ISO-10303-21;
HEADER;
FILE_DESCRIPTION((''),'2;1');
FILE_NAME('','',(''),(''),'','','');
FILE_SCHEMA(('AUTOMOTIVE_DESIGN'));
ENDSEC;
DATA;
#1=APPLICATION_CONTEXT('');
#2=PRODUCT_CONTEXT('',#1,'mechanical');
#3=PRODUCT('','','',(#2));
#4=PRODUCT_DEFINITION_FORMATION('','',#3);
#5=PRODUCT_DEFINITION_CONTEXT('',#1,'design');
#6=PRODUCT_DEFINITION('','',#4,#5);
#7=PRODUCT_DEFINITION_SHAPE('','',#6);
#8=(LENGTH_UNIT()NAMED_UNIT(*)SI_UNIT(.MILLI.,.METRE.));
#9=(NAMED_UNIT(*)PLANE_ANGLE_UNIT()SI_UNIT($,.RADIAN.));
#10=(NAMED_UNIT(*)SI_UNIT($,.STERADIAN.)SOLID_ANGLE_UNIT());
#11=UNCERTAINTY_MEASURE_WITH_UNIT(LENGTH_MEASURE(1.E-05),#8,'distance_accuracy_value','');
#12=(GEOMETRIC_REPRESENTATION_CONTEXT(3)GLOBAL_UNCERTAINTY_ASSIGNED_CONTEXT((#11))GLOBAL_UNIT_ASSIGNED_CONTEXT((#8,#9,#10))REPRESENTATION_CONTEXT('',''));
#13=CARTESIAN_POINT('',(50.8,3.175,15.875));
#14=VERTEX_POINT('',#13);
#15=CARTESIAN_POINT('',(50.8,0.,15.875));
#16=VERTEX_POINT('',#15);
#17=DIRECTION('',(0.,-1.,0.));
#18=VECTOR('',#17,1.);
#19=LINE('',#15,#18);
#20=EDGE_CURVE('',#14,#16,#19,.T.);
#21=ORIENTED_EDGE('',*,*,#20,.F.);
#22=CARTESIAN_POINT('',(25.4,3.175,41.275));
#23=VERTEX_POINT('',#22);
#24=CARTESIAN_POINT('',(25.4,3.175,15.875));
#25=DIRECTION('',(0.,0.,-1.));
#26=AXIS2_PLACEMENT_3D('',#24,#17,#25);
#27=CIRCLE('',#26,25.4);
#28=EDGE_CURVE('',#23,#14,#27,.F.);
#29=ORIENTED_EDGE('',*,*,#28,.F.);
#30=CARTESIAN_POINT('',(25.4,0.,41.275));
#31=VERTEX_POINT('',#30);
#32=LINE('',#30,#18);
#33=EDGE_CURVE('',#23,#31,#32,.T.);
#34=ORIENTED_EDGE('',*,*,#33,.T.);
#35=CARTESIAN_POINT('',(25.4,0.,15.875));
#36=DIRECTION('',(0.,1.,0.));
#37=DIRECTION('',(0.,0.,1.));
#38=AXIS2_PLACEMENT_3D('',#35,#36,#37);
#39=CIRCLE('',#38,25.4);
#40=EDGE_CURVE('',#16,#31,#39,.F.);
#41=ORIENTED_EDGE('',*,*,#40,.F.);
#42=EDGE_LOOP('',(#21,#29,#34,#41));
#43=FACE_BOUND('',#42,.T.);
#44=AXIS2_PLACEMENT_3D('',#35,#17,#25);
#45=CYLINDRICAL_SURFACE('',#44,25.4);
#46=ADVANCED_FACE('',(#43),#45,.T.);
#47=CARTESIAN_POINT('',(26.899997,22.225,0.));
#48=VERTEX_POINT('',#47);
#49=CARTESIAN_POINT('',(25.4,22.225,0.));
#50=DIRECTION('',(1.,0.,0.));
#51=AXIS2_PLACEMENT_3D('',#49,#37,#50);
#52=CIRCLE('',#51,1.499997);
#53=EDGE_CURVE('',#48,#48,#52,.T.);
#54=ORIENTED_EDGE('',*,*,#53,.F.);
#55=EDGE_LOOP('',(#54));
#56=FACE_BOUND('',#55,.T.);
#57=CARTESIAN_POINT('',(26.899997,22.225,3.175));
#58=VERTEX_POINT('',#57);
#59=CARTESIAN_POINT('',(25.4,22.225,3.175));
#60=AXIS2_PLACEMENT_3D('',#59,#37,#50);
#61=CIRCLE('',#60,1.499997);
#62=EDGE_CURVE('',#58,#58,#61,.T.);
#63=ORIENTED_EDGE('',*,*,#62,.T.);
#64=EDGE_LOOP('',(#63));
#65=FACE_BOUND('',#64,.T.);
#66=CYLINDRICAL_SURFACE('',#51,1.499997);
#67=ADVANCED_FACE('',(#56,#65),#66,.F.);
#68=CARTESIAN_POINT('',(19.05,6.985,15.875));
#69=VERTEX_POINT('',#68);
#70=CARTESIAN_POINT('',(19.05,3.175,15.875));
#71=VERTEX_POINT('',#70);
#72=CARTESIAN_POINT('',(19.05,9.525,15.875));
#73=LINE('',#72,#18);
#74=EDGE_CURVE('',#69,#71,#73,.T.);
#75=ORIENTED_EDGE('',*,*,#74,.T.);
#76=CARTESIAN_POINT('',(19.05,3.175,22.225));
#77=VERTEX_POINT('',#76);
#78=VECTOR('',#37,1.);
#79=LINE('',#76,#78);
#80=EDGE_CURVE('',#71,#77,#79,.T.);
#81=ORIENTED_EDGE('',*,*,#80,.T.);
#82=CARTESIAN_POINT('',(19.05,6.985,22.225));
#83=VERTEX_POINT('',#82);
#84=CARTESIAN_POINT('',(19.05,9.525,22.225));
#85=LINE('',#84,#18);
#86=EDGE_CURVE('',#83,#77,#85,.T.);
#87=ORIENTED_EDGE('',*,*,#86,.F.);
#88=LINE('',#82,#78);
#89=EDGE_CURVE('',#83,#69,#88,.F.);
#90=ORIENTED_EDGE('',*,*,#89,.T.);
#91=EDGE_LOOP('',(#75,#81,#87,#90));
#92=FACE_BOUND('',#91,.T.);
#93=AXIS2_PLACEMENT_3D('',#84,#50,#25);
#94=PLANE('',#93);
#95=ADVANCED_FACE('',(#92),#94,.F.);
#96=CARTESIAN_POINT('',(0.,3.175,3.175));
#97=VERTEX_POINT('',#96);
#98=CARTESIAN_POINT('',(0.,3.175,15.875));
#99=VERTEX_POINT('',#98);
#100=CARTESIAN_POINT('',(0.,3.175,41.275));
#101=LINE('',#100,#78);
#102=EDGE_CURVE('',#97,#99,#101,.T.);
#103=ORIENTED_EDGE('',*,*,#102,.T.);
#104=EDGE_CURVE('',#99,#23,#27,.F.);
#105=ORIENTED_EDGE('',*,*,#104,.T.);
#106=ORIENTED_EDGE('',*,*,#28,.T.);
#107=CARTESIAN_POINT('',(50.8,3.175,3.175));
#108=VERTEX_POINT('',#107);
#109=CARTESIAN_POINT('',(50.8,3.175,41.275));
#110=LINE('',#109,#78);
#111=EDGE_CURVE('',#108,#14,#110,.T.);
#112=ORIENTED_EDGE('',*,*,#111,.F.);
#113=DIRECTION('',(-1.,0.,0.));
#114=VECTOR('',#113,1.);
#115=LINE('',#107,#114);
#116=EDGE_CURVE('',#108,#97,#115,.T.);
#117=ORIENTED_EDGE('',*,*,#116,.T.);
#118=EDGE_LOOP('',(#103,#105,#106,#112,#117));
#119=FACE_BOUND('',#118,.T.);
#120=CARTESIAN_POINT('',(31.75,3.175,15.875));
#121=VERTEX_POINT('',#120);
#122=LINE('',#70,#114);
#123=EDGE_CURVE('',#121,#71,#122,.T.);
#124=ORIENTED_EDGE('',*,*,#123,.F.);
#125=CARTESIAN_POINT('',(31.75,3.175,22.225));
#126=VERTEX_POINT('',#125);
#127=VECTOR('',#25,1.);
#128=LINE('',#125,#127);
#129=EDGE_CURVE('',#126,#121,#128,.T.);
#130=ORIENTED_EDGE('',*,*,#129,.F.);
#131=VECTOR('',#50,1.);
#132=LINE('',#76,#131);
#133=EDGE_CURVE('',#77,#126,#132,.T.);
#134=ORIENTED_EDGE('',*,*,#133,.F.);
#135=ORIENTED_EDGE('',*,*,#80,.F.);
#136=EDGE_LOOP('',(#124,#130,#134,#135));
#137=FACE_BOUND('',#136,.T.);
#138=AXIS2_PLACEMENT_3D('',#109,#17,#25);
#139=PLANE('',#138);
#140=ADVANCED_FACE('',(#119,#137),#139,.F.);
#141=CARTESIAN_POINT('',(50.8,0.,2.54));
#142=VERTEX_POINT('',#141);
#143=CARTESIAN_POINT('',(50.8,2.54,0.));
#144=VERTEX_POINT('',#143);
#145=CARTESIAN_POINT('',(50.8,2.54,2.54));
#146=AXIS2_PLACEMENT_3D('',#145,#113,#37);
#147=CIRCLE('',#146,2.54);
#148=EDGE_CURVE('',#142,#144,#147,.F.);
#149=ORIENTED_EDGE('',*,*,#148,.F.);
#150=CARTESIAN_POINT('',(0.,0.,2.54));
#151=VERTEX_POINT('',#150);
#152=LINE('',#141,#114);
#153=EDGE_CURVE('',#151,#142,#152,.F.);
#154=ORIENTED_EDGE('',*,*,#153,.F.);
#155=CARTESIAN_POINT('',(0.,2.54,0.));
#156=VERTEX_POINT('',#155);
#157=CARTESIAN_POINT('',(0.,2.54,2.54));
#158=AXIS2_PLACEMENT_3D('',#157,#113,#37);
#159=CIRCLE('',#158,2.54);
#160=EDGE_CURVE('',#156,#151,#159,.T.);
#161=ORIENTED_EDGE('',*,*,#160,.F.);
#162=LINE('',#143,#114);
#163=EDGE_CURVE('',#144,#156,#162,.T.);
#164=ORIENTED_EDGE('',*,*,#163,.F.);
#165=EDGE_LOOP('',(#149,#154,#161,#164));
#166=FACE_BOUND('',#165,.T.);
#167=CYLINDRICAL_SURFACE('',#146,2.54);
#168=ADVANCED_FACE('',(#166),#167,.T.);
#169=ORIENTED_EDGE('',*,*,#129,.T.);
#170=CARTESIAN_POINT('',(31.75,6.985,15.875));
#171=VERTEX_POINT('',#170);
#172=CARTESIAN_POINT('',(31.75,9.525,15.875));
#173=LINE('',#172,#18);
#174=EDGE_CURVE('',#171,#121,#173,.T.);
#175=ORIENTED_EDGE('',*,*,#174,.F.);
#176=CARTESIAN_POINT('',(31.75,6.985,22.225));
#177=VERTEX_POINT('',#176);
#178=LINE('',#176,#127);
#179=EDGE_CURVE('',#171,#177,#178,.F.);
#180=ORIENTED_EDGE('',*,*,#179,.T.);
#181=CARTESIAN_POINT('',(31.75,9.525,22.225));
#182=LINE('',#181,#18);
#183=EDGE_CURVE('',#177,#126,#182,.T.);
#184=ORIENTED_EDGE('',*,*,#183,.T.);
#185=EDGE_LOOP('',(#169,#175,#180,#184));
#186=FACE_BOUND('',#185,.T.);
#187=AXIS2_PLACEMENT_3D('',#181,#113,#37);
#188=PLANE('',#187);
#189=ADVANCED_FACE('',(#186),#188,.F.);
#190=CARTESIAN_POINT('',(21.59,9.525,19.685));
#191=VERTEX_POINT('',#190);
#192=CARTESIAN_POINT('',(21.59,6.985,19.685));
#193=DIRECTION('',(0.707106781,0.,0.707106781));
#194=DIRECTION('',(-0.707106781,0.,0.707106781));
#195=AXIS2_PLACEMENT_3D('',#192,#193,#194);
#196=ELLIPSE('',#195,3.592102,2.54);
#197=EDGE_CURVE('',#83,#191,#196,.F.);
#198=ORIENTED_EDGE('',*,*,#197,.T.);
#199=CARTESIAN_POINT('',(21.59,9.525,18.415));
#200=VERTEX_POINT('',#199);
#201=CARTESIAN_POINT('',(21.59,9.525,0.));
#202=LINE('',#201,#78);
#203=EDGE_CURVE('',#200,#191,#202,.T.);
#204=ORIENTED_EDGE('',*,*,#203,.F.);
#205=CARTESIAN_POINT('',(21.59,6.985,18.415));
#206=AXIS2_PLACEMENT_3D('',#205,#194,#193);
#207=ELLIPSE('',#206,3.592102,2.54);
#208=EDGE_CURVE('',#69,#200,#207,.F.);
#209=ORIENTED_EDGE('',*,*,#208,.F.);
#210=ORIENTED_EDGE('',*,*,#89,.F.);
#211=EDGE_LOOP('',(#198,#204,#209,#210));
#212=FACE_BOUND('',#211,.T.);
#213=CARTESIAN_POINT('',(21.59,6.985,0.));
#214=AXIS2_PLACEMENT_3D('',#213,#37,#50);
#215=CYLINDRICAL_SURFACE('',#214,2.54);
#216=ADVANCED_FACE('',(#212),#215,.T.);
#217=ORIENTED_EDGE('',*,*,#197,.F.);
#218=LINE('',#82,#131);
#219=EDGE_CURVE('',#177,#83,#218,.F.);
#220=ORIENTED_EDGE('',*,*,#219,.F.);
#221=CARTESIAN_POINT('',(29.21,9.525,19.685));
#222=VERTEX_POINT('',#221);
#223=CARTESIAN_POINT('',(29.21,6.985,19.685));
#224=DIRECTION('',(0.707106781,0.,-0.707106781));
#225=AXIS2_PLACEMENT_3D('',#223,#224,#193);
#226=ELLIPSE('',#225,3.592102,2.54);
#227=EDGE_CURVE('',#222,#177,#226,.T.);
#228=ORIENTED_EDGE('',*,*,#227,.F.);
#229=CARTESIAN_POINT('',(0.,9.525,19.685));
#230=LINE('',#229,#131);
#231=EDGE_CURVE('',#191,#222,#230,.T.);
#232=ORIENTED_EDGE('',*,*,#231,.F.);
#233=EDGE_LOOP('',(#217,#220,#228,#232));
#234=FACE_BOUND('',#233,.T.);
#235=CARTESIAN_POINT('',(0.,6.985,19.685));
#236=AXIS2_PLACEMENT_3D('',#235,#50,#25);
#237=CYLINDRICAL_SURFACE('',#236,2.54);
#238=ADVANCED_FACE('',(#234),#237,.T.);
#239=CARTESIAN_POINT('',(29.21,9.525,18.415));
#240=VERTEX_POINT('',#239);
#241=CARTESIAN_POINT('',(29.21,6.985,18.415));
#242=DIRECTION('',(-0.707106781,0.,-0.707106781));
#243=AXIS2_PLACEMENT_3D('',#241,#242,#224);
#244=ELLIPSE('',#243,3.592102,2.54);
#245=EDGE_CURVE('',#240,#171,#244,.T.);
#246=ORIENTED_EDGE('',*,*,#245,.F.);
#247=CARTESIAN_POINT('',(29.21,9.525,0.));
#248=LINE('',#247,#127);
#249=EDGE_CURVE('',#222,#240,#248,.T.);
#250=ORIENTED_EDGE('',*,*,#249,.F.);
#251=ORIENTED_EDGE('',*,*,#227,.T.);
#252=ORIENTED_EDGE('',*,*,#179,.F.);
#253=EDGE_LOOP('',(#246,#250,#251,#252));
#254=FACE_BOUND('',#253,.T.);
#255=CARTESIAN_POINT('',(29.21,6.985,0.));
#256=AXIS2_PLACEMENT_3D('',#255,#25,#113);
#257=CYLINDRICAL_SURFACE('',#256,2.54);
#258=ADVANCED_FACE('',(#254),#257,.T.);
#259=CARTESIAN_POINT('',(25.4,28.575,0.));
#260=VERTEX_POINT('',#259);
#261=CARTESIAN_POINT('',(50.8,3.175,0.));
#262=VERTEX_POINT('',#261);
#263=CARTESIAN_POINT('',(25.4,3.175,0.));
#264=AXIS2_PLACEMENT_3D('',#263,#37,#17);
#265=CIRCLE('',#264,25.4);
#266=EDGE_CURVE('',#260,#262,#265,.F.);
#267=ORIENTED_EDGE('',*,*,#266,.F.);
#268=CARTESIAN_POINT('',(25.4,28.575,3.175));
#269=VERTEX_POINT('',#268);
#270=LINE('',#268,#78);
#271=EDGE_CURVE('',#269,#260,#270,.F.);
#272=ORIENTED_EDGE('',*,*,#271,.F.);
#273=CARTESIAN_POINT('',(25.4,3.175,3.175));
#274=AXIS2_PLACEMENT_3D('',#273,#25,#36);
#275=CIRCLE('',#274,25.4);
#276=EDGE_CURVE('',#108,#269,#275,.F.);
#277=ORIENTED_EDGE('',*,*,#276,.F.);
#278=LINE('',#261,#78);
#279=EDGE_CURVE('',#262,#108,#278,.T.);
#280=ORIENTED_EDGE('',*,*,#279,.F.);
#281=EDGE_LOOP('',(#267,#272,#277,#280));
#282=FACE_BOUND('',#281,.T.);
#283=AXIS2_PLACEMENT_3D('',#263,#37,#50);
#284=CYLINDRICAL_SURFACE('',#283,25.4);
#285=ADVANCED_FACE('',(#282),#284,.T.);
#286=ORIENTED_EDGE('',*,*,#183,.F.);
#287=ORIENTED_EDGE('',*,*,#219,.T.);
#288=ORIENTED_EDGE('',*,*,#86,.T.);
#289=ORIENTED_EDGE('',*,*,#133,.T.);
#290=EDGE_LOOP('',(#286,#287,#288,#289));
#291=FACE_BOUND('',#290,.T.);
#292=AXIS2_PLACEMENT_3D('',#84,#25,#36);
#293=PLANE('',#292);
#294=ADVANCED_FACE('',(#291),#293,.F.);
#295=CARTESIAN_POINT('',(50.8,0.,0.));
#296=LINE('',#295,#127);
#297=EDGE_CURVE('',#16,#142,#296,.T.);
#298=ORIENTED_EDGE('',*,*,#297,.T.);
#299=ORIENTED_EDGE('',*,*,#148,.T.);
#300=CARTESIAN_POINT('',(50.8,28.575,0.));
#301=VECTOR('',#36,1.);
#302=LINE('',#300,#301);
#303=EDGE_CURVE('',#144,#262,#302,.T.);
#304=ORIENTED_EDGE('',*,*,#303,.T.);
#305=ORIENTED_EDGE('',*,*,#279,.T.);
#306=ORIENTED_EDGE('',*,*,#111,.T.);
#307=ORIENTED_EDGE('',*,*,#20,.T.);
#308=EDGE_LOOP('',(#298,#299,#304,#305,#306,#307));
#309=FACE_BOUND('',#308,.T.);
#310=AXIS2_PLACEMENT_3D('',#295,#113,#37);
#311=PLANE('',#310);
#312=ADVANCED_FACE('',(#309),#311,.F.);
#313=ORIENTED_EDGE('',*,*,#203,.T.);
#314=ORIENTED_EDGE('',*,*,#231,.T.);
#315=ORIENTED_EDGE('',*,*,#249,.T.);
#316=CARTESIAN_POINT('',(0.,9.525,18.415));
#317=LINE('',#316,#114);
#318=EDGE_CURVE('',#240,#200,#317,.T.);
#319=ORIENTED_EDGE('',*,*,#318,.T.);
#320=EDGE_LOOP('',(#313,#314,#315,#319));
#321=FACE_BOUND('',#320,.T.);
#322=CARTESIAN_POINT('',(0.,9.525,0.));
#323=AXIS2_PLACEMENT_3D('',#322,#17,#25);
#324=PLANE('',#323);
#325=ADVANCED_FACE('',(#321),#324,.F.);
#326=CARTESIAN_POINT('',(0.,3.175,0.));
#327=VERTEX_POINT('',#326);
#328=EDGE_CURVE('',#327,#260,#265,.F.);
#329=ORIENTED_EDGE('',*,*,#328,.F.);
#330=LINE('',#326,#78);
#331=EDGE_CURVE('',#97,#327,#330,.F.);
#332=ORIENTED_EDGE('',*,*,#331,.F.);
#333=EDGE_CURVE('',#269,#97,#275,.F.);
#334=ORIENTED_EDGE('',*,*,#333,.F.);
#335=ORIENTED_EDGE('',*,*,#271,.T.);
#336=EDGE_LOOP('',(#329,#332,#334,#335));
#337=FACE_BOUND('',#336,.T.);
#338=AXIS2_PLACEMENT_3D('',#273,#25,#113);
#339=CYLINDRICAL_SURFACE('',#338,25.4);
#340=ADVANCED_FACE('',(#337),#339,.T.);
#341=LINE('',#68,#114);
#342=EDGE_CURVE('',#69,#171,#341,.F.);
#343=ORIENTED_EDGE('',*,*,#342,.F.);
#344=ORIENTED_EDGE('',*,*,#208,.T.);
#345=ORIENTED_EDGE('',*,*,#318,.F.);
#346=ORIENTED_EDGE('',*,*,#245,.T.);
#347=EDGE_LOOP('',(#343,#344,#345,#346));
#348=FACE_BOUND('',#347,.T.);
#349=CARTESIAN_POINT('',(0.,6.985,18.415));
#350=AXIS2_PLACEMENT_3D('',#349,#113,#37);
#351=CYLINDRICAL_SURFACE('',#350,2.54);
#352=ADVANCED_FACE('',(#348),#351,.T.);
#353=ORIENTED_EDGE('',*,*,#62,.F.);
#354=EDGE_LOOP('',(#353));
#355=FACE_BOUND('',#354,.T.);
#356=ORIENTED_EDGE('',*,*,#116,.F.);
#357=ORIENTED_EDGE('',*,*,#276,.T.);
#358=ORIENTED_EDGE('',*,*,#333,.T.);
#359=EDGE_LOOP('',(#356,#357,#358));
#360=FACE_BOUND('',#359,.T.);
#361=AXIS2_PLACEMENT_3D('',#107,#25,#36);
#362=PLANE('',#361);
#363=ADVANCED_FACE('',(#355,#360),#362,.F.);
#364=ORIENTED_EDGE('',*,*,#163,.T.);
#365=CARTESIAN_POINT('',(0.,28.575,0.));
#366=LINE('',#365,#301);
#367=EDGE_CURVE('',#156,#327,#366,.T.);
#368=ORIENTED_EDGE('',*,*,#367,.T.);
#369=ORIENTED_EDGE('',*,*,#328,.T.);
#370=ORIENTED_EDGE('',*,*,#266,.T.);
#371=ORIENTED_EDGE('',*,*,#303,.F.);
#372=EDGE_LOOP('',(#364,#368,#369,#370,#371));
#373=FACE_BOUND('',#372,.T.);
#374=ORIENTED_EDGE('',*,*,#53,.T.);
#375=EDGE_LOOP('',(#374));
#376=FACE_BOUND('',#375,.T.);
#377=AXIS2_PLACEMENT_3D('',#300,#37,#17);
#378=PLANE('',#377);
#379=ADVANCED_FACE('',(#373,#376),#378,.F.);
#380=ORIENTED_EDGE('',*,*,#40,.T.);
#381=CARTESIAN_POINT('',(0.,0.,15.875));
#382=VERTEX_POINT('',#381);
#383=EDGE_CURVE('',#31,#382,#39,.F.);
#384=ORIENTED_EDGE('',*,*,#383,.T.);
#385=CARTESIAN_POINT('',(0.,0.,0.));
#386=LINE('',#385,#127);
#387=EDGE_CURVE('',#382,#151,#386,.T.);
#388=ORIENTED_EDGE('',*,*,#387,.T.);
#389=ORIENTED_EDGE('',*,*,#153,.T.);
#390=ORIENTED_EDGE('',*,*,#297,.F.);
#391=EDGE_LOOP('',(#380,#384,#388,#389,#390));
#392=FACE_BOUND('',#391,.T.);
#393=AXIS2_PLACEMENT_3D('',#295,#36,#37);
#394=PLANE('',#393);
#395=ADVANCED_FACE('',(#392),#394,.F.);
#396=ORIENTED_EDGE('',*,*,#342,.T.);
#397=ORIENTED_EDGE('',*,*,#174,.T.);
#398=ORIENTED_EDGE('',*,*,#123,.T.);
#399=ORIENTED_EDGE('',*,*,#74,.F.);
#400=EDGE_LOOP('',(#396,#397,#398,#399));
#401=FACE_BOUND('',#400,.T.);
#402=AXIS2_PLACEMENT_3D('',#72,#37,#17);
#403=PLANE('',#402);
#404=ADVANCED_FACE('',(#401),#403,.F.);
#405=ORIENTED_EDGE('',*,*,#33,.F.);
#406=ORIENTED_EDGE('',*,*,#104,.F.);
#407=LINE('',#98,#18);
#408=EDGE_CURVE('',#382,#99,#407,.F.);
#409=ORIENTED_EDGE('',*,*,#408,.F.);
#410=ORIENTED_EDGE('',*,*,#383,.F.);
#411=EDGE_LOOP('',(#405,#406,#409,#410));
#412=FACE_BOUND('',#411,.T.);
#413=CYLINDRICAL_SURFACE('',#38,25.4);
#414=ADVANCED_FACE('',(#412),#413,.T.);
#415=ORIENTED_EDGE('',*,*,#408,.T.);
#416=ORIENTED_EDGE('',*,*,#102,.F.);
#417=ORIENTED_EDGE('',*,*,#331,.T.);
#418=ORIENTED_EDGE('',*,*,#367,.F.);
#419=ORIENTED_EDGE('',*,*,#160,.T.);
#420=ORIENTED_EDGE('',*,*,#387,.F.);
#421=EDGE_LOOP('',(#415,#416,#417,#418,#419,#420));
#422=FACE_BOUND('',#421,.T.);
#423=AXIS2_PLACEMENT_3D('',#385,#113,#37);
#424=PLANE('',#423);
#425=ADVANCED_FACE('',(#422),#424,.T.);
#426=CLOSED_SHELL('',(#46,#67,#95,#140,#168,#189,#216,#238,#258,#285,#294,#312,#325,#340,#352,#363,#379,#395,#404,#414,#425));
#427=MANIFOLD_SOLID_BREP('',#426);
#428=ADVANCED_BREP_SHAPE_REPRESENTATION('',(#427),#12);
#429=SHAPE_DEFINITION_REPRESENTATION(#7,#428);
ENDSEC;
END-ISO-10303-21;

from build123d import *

# Parameters (mm, degrees)
BOSS_EXTRUDE1_DEPTH = 50.8
SKETCH2_W           = 12.7
SKETCH2_H           = 6.35
BOSS_EXTRUDE2_DEPTH = 6.35
SKETCH3_R           = 1.499997
CUT_EXTRUDE1_DEPTH  = 70.633186233
FILLET1_R           = 2.54
FILLET2_R           = 25.4
FILLET3_R           = 2.54


with BuildPart() as part:
    # Sketch1 → Boss-Extrude1 (new body)
    with BuildSketch(Plane(origin=(0, 0, 0), x_dir=(0, 0, -1), z_dir=(1, 0, 0))):
        Polygon((0, 0), (-41.275, 0), (-41.275, 3.175), (-3.175, 3.175), (-3.175, 28.575), (0, 28.575), align=None)
    extrude(amount=BOSS_EXTRUDE1_DEPTH)

    # Sketch2 → Boss-Extrude2 (add)
    with BuildSketch(Plane(origin=(0, 3.175, 0), x_dir=(1, 0, 0), z_dir=(0, 1, 0))):
        with Locations((25.4, -19.05)):
            Rectangle(SKETCH2_W, SKETCH2_H)
    extrude(amount=BOSS_EXTRUDE2_DEPTH)

    # Sketch3 → Cut-Extrude1 (cut, through all)
    with BuildSketch(Plane.XY.offset(3.175)):
        with Locations((25.4, 22.225)):
            Circle(SKETCH3_R)
    extrude(amount=-CUT_EXTRUDE1_DEPTH, mode=Mode.SUBTRACT)

    # Fillet1
    fillet1_edges = [part.edges().sort_by_distance(p)[0] for p in [
        (19.05, 9.525, 19.05),
        (25.4, 9.525, 22.225),
        (31.75, 9.525, 19.05),
        (25.4, 9.525, 15.875),
    ]]
    fillet(fillet1_edges, radius=FILLET1_R)

    # Fillet2
    fillet2_edges = [part.edges().sort_by_distance(p)[0] for p in [
        (0, 28.575, 1.5875),
        (50.8, 28.575, 1.5875),
        (50.8, 1.5875, 41.275),
        (0, 1.5875, 41.275),
    ]]
    fillet(fillet2_edges, radius=FILLET2_R - 0.0001)  # a hair under: the kernel refuses the full size

    # Fillet3
    fillet3_edges = [part.edges().sort_by_distance(p)[0] for p in [
        (25.4, 0, 0),
    ]]
    fillet(fillet3_edges, radius=FILLET3_R)


solid = part.part
